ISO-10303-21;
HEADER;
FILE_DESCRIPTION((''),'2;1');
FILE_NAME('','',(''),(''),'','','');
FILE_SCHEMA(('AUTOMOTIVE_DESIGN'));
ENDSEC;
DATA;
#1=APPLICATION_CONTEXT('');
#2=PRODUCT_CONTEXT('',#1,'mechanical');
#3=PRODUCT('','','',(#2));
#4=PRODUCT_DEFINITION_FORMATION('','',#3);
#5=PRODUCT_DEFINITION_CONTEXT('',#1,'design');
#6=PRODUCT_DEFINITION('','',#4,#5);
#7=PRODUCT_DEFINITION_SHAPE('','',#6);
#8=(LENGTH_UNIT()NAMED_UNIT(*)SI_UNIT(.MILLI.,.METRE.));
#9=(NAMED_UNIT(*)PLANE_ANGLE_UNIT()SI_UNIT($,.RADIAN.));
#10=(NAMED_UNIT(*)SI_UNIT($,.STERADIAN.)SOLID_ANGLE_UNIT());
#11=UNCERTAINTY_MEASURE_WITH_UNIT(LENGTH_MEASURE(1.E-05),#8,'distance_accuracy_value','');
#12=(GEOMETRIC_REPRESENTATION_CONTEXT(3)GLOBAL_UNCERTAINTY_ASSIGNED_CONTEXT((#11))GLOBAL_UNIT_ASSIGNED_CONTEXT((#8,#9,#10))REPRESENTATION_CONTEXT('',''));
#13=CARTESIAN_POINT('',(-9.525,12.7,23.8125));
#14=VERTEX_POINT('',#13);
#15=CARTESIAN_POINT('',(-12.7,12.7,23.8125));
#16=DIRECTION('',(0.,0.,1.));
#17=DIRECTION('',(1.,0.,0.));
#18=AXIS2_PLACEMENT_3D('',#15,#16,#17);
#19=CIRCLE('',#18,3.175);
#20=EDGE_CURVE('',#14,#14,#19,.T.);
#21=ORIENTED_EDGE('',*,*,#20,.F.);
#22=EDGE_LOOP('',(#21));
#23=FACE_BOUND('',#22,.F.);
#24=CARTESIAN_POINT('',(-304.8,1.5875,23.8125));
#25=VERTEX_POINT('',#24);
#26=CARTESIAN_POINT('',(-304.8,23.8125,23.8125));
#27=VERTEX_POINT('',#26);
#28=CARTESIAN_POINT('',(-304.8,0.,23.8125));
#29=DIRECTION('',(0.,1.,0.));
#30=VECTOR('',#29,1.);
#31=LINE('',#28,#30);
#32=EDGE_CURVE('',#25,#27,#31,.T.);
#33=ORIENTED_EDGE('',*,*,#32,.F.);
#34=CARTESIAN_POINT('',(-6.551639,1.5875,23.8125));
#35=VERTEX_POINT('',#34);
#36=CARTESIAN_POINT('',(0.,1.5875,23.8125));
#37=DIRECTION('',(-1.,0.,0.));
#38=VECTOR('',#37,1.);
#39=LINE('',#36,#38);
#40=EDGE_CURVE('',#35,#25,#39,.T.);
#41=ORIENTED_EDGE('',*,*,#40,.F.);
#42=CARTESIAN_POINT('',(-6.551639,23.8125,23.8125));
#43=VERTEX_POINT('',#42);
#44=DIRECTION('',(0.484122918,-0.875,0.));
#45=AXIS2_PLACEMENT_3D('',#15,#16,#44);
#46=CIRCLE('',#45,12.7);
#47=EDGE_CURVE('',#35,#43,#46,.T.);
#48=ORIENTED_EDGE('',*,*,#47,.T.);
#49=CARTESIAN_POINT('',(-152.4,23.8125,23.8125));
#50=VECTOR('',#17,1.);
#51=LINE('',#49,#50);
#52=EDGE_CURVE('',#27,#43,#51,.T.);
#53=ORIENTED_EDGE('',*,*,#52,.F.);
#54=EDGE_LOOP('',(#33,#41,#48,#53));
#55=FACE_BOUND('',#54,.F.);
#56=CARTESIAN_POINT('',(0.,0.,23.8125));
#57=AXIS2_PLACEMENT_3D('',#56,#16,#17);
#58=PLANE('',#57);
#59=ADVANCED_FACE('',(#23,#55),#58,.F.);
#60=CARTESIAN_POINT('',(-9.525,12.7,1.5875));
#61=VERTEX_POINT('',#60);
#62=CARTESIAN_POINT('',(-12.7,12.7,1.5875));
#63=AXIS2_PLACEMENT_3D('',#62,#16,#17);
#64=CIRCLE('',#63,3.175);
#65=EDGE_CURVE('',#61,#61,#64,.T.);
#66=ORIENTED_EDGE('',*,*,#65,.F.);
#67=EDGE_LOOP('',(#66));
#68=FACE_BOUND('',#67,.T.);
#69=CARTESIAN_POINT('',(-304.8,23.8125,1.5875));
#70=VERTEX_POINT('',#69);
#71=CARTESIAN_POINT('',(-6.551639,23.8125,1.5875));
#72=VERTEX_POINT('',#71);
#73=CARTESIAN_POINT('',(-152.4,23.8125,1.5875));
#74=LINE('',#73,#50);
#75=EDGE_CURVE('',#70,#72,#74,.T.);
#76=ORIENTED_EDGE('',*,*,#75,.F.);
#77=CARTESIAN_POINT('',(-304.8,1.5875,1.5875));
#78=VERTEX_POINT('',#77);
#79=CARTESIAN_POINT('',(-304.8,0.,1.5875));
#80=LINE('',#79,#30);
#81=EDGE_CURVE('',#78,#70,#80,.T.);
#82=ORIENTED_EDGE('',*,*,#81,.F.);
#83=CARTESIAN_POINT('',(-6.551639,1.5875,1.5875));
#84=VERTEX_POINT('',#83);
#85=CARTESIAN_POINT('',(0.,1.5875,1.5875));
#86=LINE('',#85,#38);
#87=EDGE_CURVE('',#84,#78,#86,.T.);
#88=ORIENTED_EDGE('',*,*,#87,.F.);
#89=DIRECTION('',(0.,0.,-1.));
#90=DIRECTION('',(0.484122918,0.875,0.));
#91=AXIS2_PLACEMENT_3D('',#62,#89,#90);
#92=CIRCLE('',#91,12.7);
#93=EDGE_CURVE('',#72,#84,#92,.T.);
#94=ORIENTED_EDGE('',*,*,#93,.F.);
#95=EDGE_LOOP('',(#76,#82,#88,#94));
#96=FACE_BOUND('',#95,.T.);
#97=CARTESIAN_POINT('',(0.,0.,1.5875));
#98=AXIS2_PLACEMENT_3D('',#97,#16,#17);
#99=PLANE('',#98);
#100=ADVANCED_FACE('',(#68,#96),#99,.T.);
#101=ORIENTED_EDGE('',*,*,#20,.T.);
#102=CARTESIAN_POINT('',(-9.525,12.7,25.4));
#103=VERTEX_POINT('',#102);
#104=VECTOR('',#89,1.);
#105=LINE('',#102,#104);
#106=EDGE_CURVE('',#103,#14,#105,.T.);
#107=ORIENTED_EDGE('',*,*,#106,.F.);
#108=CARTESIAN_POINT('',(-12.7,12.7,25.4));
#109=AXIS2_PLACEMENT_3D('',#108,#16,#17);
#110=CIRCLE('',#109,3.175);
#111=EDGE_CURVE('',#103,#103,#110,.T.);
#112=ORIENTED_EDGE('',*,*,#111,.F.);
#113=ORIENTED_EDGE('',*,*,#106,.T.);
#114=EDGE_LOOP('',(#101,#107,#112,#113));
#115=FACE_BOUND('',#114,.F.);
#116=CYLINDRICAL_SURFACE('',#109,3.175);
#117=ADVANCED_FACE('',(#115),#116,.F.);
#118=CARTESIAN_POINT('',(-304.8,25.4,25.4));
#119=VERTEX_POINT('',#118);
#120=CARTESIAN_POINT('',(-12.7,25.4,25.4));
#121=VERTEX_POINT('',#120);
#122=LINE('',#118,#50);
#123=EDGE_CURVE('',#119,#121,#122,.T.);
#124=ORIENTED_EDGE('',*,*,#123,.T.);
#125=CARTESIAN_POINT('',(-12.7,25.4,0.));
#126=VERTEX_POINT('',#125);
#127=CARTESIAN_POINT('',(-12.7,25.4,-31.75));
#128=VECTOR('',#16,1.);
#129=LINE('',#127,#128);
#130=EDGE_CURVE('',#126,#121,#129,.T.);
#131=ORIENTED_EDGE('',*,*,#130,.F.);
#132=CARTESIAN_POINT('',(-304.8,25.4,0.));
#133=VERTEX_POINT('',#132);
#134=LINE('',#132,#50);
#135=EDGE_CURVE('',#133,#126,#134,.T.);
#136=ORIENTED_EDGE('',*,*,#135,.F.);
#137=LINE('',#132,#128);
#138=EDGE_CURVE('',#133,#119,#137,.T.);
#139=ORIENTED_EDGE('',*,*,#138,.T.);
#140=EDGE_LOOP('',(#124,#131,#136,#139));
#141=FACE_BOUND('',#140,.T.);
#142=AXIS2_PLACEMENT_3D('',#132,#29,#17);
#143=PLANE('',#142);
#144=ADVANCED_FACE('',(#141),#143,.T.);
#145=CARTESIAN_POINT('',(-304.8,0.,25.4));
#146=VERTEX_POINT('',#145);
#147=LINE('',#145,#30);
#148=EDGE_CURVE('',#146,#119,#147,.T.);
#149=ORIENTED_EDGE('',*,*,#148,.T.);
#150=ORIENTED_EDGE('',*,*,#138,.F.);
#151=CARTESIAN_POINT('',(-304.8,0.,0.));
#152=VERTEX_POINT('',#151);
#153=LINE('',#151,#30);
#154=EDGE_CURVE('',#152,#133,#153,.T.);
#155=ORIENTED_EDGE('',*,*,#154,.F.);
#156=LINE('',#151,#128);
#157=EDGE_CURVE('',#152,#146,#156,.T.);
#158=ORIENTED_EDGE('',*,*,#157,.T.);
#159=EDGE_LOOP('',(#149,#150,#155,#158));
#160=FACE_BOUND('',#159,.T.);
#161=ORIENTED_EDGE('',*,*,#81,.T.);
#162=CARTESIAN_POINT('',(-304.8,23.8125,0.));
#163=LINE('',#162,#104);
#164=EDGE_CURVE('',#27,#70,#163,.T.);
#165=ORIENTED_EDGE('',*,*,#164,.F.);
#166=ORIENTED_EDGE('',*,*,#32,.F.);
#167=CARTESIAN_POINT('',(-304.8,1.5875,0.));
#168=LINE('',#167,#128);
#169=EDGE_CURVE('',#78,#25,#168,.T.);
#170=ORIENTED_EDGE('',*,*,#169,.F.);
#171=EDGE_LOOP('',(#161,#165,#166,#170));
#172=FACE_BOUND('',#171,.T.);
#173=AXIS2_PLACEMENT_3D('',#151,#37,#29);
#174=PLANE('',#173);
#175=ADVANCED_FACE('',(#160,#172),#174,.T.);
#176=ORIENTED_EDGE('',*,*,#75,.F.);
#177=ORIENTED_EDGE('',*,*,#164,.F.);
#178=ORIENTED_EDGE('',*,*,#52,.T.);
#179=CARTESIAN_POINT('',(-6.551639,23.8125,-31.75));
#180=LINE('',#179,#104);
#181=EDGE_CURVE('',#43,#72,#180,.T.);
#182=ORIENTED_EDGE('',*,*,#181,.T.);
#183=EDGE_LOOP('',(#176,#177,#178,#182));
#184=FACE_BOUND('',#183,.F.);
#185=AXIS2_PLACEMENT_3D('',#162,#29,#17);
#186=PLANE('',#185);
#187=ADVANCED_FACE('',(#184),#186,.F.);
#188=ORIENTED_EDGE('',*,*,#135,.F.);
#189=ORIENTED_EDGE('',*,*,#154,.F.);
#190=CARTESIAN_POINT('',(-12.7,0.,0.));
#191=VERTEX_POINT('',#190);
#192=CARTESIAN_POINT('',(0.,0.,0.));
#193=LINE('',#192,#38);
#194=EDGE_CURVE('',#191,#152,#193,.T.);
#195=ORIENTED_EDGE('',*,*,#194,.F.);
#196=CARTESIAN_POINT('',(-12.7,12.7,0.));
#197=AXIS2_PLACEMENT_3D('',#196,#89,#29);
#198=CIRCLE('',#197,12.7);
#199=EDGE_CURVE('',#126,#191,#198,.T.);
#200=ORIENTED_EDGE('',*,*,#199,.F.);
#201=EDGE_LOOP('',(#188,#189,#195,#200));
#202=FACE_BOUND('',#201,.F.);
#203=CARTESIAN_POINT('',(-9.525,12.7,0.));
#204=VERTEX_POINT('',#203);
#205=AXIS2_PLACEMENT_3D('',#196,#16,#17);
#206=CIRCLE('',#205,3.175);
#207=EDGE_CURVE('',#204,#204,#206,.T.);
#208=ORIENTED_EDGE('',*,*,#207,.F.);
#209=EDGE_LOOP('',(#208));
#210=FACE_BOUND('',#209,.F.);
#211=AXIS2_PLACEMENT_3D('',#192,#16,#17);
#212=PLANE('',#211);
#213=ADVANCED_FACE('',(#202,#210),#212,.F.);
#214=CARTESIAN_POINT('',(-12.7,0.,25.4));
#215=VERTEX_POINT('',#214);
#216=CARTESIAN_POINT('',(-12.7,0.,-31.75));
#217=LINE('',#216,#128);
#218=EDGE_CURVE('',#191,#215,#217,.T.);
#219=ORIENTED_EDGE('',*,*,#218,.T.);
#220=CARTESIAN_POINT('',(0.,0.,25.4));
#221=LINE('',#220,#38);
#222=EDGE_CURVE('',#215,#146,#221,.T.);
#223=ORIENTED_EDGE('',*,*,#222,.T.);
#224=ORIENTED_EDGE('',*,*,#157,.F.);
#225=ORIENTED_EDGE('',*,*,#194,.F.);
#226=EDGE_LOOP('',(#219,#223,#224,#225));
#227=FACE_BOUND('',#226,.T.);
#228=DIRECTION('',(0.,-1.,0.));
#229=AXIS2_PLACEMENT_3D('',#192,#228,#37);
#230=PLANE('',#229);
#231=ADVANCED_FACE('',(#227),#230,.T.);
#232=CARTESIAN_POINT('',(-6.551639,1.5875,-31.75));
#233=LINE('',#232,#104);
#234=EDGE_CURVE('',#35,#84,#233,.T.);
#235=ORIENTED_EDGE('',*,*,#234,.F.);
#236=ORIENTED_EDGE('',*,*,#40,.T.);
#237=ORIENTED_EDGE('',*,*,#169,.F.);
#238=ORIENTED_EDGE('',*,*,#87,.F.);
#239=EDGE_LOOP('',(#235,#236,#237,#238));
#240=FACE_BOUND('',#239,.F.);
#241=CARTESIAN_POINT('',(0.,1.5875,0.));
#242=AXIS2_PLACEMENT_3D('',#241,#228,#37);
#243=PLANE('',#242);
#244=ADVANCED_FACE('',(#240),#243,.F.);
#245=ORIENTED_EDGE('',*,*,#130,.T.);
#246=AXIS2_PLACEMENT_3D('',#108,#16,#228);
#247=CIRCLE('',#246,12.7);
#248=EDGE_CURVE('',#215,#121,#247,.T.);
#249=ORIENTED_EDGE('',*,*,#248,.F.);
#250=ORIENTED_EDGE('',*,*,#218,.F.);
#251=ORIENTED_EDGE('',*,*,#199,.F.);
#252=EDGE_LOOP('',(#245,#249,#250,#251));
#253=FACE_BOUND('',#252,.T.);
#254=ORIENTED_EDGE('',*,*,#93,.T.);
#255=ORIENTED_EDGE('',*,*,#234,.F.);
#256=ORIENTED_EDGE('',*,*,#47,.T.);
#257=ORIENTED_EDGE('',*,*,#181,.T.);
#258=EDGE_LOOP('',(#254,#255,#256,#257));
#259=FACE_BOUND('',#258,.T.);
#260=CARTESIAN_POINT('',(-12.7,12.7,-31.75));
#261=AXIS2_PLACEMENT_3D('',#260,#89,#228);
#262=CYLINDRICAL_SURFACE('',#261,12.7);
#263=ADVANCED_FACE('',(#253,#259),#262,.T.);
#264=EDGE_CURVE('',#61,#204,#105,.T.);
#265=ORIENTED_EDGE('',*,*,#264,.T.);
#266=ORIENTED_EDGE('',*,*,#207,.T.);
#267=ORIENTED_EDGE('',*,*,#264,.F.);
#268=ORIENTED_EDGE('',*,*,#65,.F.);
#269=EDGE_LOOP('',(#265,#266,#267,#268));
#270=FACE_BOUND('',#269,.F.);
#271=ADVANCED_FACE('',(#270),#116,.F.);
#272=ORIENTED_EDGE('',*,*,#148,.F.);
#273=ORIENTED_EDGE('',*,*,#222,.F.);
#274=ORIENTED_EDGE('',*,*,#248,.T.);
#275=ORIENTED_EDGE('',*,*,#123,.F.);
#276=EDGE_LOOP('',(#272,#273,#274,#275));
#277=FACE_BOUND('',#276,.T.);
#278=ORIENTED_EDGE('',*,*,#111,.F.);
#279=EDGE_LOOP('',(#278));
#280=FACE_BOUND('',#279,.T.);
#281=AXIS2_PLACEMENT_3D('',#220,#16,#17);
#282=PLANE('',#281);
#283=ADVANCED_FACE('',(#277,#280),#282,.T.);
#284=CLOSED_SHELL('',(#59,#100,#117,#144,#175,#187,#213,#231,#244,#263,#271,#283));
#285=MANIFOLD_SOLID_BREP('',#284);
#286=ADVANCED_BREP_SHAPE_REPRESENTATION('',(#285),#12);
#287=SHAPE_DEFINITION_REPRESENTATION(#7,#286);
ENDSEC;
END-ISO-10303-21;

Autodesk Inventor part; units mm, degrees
ref_plane "YZ Plane" through (0, 0, 0) normal (1, 0, 0) x (0, 1, 0)
ref_plane "XZ Plane" through (0, 0, 0) normal (0, 1, 0) x (-1, 0, 0)
ref_plane "XY Plane" through (0, 0, 0) normal (0, 0, 1) x (1, 0, 0)
sketch "Sketch1" plane through (0, 0, 0) normal (0, 0, 1) x (1, 0, 0)
  line L0 (0, 0) -> (-304.8, 0)
  line L1 (-304.8, 0) -> (-304.8, 25.4)
  line L2 (-304.8, 25.4) -> (0, 25.4)
  line L3 (0, 25.4) -> (0, 0)
  dimension "d0" = 25.4
  dimension "d1" = 304.8
extrude "Extrusion1" add sketch "Sketch1" along normal blind 25.4
shell "Shell1" thickness 1.5875 removed faces 2 at (0, 16.9333, 8.4667) at (-304.8, 8.4667, 8.4667)
sketch "Sketch2" plane through (0, 0, 25.4) normal (0, 0, 1) x (1, 0, 0)
  line L0 (0, 0) -> (-304.8, 0) projected
  line L1 (0, 25.4) -> (0, 0) projected
  circle A0 centre (-12.7, 12.7) radius 3.175
  dimension "d5" = 12.7
  dimension "d6" = 12.7
  dimension "d7" = 6.35
extrude "Extrusion2" cut sketch "Sketch2" against normal through all
fillet "Fillet1" radius 12.7 2 edges at (0, 25.4, 12.7) (0, 0, 12.7)
properties part number "Shovel_Arm" material "Aluminum-6061"
